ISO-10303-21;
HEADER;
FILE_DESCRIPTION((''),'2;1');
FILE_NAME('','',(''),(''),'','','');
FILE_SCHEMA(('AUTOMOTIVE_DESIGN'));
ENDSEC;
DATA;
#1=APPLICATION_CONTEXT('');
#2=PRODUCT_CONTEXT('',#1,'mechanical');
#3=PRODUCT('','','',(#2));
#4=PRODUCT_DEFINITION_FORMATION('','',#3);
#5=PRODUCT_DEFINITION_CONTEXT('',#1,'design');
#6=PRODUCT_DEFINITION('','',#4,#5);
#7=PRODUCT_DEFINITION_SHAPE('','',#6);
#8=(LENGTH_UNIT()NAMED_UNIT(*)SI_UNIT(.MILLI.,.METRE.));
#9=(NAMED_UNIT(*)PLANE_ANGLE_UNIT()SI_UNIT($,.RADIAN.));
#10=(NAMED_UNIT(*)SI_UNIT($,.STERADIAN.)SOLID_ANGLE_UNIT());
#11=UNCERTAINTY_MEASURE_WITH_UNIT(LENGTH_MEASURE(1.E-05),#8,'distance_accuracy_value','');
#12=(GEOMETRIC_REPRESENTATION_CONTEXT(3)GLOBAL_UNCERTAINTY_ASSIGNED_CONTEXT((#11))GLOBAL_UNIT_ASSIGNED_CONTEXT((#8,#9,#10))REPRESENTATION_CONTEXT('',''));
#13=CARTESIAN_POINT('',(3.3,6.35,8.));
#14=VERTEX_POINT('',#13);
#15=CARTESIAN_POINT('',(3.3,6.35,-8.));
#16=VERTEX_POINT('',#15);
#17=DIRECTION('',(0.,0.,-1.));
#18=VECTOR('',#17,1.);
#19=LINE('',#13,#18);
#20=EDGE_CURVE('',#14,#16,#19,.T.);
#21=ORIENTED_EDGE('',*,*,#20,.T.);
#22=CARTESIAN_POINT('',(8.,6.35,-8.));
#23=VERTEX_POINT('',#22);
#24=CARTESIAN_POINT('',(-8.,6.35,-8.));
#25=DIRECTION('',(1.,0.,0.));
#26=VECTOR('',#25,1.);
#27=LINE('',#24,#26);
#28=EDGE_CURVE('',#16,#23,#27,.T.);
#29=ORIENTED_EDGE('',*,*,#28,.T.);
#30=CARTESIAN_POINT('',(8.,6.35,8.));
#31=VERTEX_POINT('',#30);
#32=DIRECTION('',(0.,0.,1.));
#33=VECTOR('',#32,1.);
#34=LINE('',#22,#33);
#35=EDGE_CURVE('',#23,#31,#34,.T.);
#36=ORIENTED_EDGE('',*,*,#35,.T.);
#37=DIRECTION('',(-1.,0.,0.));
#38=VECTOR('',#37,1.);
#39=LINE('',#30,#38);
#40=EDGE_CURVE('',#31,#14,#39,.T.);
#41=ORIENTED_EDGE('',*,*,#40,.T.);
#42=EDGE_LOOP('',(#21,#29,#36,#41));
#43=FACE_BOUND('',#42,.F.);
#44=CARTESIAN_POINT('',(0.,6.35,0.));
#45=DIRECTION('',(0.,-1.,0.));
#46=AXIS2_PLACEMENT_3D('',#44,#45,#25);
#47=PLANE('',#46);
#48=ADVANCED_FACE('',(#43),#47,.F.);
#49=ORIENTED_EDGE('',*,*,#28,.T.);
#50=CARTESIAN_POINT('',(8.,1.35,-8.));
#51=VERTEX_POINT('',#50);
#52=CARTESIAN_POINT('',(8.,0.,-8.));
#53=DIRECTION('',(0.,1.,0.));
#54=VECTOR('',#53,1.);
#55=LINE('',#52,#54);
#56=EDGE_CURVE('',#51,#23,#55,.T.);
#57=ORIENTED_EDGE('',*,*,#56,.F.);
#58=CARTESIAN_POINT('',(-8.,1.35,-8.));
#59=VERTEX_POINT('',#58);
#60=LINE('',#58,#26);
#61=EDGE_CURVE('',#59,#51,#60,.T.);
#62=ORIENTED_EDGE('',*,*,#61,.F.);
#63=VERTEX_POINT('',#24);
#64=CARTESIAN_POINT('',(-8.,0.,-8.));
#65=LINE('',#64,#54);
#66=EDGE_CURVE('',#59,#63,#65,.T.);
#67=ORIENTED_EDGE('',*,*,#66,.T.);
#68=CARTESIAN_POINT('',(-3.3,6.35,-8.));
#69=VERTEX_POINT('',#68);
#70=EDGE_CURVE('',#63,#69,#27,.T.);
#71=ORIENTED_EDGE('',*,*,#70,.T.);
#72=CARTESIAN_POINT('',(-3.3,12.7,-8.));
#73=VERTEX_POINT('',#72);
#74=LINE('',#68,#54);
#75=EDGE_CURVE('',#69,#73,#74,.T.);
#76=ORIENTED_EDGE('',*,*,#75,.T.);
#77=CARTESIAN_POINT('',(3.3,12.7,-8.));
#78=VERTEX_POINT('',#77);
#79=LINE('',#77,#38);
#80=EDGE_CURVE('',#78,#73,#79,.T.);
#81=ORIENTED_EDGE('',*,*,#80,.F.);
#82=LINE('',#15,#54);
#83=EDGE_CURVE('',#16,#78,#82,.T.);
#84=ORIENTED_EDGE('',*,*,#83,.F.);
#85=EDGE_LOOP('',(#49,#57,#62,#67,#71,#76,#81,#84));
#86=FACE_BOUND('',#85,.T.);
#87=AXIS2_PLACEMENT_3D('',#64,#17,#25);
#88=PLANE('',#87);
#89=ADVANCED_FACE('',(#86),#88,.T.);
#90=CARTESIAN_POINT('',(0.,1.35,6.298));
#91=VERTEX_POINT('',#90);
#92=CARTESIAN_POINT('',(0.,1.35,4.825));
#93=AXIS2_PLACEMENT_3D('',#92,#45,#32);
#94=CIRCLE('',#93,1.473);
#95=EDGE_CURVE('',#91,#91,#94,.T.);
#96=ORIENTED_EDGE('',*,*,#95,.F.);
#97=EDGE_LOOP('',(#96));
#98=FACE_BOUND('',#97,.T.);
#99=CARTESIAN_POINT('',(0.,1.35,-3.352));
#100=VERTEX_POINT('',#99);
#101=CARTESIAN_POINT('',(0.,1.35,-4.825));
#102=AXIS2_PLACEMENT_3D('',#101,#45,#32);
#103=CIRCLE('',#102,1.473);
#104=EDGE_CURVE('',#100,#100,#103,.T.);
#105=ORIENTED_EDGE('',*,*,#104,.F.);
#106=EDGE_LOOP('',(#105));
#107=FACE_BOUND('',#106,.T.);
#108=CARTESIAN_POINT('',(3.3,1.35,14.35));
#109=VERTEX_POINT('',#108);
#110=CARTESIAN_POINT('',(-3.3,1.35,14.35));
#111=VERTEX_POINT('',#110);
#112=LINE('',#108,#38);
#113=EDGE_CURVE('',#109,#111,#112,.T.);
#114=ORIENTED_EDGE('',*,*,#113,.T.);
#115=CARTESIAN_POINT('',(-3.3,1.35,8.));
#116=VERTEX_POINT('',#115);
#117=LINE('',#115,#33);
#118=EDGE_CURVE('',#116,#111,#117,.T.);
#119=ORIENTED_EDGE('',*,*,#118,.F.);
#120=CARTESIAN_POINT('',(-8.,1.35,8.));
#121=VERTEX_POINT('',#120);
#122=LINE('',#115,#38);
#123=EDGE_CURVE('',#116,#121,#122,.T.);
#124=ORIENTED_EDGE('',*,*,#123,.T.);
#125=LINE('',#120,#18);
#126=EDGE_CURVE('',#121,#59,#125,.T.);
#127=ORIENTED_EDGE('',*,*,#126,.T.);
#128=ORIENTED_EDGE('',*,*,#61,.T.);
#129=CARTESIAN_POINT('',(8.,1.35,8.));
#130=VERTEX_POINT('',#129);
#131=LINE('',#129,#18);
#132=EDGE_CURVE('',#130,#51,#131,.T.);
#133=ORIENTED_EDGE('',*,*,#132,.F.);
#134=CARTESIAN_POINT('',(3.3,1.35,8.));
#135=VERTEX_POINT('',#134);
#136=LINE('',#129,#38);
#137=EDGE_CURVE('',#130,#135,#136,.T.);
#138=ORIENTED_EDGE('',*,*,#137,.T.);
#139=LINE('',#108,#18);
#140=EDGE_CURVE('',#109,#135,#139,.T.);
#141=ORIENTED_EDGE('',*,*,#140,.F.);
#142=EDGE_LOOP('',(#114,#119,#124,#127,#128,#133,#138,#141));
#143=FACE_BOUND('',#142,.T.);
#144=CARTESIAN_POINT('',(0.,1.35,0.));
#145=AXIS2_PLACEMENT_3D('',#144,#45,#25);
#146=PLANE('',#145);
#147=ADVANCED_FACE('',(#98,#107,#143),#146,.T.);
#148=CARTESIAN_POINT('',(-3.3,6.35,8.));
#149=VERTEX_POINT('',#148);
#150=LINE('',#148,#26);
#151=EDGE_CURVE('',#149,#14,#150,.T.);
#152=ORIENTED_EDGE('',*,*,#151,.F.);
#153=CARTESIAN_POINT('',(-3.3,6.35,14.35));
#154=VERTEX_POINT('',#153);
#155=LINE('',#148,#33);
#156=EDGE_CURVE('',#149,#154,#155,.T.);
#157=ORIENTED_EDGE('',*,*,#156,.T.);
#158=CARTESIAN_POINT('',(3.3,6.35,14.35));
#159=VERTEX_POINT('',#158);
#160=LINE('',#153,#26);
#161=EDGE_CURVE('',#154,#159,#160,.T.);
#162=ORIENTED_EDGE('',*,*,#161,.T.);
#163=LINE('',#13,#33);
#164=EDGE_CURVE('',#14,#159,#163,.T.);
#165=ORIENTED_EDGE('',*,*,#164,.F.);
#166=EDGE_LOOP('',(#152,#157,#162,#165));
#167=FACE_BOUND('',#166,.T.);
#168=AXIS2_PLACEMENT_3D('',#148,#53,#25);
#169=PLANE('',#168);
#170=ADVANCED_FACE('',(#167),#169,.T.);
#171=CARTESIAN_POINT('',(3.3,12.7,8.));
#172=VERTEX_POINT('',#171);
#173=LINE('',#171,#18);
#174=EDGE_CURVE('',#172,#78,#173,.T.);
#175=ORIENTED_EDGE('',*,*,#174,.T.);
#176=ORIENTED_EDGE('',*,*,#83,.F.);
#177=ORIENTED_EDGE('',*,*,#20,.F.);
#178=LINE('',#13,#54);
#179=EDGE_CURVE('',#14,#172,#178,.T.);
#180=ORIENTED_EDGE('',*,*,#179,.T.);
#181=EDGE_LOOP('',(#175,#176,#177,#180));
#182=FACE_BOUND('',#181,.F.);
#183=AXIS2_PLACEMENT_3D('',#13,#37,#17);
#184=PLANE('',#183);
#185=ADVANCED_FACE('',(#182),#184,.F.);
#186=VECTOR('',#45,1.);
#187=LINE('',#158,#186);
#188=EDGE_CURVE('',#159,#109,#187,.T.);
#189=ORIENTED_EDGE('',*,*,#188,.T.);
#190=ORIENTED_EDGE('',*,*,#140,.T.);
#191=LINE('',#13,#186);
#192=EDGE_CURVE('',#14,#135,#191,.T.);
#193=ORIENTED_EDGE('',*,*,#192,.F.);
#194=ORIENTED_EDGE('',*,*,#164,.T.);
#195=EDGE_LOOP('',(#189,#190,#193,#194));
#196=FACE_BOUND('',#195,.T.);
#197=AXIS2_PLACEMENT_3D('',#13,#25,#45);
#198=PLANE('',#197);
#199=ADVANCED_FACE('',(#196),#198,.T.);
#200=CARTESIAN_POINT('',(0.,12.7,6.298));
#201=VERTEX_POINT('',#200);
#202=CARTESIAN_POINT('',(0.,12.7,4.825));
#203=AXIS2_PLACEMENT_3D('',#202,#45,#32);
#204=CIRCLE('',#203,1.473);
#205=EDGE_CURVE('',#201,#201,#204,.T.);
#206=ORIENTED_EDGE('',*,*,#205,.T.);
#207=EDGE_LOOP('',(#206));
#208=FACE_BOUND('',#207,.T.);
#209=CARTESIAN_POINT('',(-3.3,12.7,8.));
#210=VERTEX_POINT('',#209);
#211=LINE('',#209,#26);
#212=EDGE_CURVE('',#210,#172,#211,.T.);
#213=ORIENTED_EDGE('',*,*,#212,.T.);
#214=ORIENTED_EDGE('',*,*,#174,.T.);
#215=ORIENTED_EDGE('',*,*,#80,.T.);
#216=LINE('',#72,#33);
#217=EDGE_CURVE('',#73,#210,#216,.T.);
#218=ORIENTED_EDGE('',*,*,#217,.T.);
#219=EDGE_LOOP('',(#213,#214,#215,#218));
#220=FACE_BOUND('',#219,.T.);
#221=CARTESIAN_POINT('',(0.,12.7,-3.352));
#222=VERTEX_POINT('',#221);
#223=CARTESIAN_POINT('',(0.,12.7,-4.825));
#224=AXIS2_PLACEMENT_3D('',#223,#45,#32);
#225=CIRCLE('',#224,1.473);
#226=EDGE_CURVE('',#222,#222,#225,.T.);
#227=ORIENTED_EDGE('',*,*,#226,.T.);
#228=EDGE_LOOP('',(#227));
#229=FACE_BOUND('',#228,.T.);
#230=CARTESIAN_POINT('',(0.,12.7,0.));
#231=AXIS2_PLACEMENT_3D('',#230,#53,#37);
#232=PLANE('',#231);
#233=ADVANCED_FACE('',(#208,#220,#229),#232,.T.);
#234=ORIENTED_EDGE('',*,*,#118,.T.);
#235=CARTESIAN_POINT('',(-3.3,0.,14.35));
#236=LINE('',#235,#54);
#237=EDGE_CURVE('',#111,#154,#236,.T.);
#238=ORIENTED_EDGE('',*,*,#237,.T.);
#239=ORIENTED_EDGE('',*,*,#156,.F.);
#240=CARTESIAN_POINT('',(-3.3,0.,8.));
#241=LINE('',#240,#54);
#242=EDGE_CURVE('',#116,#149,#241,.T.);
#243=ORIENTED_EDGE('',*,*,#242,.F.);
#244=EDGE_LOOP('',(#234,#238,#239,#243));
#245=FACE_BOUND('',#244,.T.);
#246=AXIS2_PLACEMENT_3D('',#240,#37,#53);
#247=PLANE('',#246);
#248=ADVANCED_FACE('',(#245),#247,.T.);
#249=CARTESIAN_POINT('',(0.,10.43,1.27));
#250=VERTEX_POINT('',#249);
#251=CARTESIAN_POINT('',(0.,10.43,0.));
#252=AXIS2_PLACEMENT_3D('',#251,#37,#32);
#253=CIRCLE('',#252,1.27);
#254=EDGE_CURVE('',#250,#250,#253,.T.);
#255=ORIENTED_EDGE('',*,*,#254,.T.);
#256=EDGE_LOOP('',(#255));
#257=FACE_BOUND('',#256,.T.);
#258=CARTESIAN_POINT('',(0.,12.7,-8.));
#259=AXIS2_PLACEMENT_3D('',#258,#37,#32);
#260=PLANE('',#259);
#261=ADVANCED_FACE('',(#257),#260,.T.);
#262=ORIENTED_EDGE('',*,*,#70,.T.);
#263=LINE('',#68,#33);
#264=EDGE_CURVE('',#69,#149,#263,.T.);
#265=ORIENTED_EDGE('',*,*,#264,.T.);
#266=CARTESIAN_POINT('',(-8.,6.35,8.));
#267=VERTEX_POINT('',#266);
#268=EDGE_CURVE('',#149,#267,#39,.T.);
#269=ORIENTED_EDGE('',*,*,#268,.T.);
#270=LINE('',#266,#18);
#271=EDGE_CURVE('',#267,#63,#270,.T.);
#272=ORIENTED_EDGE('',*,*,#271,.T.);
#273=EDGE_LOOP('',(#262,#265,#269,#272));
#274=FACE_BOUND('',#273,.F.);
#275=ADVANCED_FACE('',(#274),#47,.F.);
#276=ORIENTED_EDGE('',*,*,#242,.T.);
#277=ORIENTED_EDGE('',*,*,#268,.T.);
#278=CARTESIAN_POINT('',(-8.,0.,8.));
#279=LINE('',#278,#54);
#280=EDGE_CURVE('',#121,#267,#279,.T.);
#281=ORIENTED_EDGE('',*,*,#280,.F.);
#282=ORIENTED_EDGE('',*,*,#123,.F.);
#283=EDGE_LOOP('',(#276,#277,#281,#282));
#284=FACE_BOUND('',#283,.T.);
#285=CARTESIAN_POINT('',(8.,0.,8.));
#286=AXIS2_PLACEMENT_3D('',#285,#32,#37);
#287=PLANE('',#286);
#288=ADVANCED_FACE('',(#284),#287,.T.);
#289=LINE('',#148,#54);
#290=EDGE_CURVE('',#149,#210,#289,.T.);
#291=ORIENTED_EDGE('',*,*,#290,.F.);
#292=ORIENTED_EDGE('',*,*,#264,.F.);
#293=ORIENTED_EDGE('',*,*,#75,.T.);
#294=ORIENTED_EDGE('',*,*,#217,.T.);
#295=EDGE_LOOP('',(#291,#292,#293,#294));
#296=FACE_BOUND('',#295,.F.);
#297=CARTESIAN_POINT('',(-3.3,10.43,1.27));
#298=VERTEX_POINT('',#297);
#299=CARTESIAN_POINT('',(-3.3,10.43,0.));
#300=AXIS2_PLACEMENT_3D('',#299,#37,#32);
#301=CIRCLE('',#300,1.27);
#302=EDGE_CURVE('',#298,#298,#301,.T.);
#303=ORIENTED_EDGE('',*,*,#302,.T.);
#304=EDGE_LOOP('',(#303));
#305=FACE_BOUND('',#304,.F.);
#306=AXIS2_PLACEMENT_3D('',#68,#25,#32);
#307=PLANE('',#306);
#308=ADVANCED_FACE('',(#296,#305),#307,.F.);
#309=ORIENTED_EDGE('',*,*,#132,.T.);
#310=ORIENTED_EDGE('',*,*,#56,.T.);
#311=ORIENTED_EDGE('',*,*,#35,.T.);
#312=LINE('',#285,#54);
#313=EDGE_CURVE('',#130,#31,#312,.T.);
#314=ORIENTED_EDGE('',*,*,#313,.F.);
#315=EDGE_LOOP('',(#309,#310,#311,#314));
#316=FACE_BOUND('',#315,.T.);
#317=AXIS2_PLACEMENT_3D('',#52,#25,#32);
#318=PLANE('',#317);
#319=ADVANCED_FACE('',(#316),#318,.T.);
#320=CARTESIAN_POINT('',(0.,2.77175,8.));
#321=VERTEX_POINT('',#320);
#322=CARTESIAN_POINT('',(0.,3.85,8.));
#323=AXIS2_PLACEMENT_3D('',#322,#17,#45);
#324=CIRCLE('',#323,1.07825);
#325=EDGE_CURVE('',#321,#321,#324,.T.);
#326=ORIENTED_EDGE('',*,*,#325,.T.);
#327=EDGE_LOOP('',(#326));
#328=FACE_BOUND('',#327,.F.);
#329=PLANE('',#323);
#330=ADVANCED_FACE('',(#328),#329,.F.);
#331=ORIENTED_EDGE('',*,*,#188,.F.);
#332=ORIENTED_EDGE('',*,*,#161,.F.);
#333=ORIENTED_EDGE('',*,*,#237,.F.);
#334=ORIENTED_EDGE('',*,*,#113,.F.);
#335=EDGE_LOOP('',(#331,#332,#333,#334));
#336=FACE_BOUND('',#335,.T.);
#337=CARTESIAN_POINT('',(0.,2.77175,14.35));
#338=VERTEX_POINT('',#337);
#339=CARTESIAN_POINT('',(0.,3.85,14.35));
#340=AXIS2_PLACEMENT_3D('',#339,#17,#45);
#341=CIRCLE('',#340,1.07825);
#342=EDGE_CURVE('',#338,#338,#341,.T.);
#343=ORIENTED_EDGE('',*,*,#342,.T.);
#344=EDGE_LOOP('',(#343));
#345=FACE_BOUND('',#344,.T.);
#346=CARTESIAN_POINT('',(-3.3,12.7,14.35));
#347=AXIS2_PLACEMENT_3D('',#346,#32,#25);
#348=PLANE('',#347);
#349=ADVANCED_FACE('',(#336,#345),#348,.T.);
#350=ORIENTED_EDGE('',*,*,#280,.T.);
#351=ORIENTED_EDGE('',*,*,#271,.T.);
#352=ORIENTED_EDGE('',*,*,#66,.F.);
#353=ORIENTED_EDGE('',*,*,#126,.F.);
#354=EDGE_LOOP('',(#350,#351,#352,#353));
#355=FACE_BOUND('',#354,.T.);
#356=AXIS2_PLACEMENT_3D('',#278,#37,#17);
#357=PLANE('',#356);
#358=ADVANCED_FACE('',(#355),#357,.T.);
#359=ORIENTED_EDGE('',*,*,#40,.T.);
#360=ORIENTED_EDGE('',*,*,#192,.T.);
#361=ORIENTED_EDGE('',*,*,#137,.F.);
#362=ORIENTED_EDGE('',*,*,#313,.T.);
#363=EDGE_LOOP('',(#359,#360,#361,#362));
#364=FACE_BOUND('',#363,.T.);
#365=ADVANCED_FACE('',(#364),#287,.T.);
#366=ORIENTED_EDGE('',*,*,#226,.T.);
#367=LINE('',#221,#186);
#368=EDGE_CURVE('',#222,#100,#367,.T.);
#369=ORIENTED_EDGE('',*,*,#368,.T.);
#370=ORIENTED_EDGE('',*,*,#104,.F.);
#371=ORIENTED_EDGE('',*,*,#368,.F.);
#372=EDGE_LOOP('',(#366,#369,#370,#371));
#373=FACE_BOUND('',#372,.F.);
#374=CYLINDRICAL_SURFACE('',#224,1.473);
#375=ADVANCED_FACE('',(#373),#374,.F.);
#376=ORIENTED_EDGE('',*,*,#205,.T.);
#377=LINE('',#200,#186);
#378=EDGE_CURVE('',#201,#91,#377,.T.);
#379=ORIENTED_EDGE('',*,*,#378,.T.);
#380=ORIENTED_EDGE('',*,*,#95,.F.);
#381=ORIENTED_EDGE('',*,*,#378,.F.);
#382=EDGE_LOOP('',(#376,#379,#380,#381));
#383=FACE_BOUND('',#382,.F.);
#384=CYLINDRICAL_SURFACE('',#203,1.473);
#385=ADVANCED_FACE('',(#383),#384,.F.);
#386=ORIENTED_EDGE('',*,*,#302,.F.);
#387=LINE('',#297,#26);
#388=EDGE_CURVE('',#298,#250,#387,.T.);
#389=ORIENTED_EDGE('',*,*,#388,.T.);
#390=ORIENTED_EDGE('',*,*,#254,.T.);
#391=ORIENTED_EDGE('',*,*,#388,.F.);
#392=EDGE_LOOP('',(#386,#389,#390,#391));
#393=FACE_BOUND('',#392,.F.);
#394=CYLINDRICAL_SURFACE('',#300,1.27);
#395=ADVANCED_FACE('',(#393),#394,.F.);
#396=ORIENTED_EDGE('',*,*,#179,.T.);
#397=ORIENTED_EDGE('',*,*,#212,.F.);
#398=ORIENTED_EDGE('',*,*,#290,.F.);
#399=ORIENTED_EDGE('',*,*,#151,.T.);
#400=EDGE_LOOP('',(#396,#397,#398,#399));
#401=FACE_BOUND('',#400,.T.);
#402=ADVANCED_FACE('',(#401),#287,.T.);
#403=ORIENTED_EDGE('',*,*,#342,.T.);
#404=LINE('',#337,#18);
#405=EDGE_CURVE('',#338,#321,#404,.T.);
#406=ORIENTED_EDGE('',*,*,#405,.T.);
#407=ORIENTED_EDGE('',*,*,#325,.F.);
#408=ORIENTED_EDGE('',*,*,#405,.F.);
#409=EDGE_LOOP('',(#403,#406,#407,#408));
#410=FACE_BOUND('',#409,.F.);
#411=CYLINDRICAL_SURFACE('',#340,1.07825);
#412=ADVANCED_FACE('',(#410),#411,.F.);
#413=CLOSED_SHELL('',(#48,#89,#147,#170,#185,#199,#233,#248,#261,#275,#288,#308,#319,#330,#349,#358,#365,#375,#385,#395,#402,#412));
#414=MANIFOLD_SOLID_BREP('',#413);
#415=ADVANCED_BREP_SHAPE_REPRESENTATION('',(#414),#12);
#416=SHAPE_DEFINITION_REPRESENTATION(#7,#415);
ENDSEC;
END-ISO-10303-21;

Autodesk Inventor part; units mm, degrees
ref_plane "YZ Plane" through (0, 0, 0) normal (1, 0, 0) x (0, 1, 0)
ref_plane "XZ Plane" through (0, 0, 0) normal (0, 1, 0) x (-1, 0, 0)
ref_plane "XY Plane" through (0, 0, 0) normal (0, 0, 1) x (1, 0, 0)
sketch "Sketch1" plane through (0, 0, 0) normal (0, 1, 0) x (-1, 0, 0)
  point P0 (0, 0)
sketch "Sketch2" plane through (0, 0, 0) normal (0, 1, 0) x (-1, 0, 0)
  line L0 (3.3, 8) -> (-3.3, 8)
  line L1 (-3.3, 8) -> (-3.3, -8)
  line L2 (-3.3, -8) -> (3.3, -8)
  line L3 (3.3, -8) -> (3.3, 8)
  line L4 (3.3, 8) -> (-3.3, -8) construction
  line L5 (-3.3, 8) -> (3.3, -8) construction
  point P0 (0, 0)
  dimension "d0" = 6.6
  dimension "d1" = 16
extrude "Extrusion1" add sketch "Sketch2" along normal blind 6.35
sketch "Sketch3" plane through (0, 0, 0) normal (0, -1, 0) x (1, 0, 0)
  line L0 (-8, -8) -> (8, -8)
  line L1 (8, -8) -> (8, 8)
  line L2 (8, 8) -> (-8, 8)
  line L3 (-8, 8) -> (-8, -8)
  line L4 (-8, -8) -> (8, 8) construction
  line L5 (8, -8) -> (-8, 8) construction
  point P0 (0, 0)
  dimension "d13" = 16
  dimension "d14" = 16
move or copy body "Move1" bodies to move or copy 1 copy no translate (0, 6.35, 0)
extrude "Extrusion2" add sketch "Sketch3" against normal up to surface (6.35 mm away)
chamfer "Chamfer1" [suppressed]
chamfer "Chamfer2" [suppressed]
sketch "Sketch4" plane through (-3.3, 12.7, -8) normal (0, 1, 0) x (1, 0, 0)
  line L0 (4.4354, -16) -> (2.1646, -16) projected
  line L1 (-4.7, 0) -> (11.3, 0) projected
  point P0 (3.3, -8)
  point P1 (3.3, -3.175)
  point P2 (3.3, -12.825)
fillet "Fillet1" [suppressed]
sketch "Sketch5" plane through (-3.3, 12.7, 8) normal (0, 0, 1) x (1, 0, 0)
  circle A0 centre (3.3, -9.5232) radius 2.9337
  point P0 (3.3, -12.7)
extrude "Extrusion3" [suppressed]
hole "Hole3" [suppressed]
chamfer "Chamfer3" [suppressed]
sketch "Sketch6" plane through (-3.3, 12.7, -8) normal (-1, 0, 0) x (0, 0, 1)
  line L0 (0, 0) -> (16, 0) projected
  circle A0 centre (8, -2.27) radius 1.27
  point P0 (8, -12.7)
  dimension "d62" = 2.54
extrude "Extrusion4" cut sketch "Sketch6" against normal blind 3.3
sketch "Sketch7" plane through (-3.3, 12.7, 8) normal (0, 0, 1) x (1, 0, 0)
  line L0 (0, -6.35) -> (0, 0) projected
  line L1 (11.3, -12.7) -> (-4.7, -12.7) projected
  line L2 (0, -6.35) -> (6.6, -6.35)
  line L3 (6.6, -6.35) -> (6.6, -12.7)
  line L4 (6.6, -12.7) -> (0, -12.7)
  line L5 (0, -12.7) -> (0, -6.35)
  point P0 (3.3, -12.7)
  dimension "d65" = 6.6
extrude "Extrusion5" add sketch "Sketch7" along normal blind 6.35
sketch "Sketch8" plane through (0, 0, 0) normal (0, -1, 0) x (1, 0, 0)
  line L0 (-8, 8) -> (-8, -8) projected
  line L1 (-8, -8) -> (-8, 8)
  line L2 (-3.3, 8) -> (-8, 8) projected
  line L3 (-8, 8) -> (-3.3, 8)
  line L4 (-3.3, 8) -> (-3.3, 14.35) projected
  line L5 (-3.3, 8) -> (-3.3, 14.35)
  line L6 (3.3, 14.35) -> (-3.3, 14.35) projected
  line L7 (-3.3, 14.35) -> (3.3, 14.35)
  line L8 (8, 8) -> (3.3, 8) projected
  line L9 (3.3, 14.35) -> (3.3, 8)
  line L10 (3.3, 8) -> (8, 8)
  line L11 (-8, -8) -> (8, -8) projected
  line L12 (8, 8) -> (8, -8)
  line L13 (8, -8) -> (-8, -8)
  point P0 (0, 0)
hole "Hole4" at (0, 12.7, 4.825) at (0, 12.7, -4.825) direction (0, -1, 0) diameter 2.946 end through all clearance for "Flat Head Machine Screw (82)" size "#4" standard "Ansi Unified Screw Threads"
extrude "Extrusion6" cut sketch "Sketch8" against normal blind 1.35
hole "Hole6" at (0, 3.85, 14.35) direction (0, 0, -1) diameter 2.1565 depth 6.35 thread size "4-40 UNC" class "2B" standard "ANSI Unified Screw Threads"
sketch "Sketch9" plane through (0, 1.35, 0) normal (0, -1, 0) x (1, 0, 0)
  point P0 (0, 0)
  point P1 (0, 0)
properties part number "copper_top_ledgereod" material "Copper"
